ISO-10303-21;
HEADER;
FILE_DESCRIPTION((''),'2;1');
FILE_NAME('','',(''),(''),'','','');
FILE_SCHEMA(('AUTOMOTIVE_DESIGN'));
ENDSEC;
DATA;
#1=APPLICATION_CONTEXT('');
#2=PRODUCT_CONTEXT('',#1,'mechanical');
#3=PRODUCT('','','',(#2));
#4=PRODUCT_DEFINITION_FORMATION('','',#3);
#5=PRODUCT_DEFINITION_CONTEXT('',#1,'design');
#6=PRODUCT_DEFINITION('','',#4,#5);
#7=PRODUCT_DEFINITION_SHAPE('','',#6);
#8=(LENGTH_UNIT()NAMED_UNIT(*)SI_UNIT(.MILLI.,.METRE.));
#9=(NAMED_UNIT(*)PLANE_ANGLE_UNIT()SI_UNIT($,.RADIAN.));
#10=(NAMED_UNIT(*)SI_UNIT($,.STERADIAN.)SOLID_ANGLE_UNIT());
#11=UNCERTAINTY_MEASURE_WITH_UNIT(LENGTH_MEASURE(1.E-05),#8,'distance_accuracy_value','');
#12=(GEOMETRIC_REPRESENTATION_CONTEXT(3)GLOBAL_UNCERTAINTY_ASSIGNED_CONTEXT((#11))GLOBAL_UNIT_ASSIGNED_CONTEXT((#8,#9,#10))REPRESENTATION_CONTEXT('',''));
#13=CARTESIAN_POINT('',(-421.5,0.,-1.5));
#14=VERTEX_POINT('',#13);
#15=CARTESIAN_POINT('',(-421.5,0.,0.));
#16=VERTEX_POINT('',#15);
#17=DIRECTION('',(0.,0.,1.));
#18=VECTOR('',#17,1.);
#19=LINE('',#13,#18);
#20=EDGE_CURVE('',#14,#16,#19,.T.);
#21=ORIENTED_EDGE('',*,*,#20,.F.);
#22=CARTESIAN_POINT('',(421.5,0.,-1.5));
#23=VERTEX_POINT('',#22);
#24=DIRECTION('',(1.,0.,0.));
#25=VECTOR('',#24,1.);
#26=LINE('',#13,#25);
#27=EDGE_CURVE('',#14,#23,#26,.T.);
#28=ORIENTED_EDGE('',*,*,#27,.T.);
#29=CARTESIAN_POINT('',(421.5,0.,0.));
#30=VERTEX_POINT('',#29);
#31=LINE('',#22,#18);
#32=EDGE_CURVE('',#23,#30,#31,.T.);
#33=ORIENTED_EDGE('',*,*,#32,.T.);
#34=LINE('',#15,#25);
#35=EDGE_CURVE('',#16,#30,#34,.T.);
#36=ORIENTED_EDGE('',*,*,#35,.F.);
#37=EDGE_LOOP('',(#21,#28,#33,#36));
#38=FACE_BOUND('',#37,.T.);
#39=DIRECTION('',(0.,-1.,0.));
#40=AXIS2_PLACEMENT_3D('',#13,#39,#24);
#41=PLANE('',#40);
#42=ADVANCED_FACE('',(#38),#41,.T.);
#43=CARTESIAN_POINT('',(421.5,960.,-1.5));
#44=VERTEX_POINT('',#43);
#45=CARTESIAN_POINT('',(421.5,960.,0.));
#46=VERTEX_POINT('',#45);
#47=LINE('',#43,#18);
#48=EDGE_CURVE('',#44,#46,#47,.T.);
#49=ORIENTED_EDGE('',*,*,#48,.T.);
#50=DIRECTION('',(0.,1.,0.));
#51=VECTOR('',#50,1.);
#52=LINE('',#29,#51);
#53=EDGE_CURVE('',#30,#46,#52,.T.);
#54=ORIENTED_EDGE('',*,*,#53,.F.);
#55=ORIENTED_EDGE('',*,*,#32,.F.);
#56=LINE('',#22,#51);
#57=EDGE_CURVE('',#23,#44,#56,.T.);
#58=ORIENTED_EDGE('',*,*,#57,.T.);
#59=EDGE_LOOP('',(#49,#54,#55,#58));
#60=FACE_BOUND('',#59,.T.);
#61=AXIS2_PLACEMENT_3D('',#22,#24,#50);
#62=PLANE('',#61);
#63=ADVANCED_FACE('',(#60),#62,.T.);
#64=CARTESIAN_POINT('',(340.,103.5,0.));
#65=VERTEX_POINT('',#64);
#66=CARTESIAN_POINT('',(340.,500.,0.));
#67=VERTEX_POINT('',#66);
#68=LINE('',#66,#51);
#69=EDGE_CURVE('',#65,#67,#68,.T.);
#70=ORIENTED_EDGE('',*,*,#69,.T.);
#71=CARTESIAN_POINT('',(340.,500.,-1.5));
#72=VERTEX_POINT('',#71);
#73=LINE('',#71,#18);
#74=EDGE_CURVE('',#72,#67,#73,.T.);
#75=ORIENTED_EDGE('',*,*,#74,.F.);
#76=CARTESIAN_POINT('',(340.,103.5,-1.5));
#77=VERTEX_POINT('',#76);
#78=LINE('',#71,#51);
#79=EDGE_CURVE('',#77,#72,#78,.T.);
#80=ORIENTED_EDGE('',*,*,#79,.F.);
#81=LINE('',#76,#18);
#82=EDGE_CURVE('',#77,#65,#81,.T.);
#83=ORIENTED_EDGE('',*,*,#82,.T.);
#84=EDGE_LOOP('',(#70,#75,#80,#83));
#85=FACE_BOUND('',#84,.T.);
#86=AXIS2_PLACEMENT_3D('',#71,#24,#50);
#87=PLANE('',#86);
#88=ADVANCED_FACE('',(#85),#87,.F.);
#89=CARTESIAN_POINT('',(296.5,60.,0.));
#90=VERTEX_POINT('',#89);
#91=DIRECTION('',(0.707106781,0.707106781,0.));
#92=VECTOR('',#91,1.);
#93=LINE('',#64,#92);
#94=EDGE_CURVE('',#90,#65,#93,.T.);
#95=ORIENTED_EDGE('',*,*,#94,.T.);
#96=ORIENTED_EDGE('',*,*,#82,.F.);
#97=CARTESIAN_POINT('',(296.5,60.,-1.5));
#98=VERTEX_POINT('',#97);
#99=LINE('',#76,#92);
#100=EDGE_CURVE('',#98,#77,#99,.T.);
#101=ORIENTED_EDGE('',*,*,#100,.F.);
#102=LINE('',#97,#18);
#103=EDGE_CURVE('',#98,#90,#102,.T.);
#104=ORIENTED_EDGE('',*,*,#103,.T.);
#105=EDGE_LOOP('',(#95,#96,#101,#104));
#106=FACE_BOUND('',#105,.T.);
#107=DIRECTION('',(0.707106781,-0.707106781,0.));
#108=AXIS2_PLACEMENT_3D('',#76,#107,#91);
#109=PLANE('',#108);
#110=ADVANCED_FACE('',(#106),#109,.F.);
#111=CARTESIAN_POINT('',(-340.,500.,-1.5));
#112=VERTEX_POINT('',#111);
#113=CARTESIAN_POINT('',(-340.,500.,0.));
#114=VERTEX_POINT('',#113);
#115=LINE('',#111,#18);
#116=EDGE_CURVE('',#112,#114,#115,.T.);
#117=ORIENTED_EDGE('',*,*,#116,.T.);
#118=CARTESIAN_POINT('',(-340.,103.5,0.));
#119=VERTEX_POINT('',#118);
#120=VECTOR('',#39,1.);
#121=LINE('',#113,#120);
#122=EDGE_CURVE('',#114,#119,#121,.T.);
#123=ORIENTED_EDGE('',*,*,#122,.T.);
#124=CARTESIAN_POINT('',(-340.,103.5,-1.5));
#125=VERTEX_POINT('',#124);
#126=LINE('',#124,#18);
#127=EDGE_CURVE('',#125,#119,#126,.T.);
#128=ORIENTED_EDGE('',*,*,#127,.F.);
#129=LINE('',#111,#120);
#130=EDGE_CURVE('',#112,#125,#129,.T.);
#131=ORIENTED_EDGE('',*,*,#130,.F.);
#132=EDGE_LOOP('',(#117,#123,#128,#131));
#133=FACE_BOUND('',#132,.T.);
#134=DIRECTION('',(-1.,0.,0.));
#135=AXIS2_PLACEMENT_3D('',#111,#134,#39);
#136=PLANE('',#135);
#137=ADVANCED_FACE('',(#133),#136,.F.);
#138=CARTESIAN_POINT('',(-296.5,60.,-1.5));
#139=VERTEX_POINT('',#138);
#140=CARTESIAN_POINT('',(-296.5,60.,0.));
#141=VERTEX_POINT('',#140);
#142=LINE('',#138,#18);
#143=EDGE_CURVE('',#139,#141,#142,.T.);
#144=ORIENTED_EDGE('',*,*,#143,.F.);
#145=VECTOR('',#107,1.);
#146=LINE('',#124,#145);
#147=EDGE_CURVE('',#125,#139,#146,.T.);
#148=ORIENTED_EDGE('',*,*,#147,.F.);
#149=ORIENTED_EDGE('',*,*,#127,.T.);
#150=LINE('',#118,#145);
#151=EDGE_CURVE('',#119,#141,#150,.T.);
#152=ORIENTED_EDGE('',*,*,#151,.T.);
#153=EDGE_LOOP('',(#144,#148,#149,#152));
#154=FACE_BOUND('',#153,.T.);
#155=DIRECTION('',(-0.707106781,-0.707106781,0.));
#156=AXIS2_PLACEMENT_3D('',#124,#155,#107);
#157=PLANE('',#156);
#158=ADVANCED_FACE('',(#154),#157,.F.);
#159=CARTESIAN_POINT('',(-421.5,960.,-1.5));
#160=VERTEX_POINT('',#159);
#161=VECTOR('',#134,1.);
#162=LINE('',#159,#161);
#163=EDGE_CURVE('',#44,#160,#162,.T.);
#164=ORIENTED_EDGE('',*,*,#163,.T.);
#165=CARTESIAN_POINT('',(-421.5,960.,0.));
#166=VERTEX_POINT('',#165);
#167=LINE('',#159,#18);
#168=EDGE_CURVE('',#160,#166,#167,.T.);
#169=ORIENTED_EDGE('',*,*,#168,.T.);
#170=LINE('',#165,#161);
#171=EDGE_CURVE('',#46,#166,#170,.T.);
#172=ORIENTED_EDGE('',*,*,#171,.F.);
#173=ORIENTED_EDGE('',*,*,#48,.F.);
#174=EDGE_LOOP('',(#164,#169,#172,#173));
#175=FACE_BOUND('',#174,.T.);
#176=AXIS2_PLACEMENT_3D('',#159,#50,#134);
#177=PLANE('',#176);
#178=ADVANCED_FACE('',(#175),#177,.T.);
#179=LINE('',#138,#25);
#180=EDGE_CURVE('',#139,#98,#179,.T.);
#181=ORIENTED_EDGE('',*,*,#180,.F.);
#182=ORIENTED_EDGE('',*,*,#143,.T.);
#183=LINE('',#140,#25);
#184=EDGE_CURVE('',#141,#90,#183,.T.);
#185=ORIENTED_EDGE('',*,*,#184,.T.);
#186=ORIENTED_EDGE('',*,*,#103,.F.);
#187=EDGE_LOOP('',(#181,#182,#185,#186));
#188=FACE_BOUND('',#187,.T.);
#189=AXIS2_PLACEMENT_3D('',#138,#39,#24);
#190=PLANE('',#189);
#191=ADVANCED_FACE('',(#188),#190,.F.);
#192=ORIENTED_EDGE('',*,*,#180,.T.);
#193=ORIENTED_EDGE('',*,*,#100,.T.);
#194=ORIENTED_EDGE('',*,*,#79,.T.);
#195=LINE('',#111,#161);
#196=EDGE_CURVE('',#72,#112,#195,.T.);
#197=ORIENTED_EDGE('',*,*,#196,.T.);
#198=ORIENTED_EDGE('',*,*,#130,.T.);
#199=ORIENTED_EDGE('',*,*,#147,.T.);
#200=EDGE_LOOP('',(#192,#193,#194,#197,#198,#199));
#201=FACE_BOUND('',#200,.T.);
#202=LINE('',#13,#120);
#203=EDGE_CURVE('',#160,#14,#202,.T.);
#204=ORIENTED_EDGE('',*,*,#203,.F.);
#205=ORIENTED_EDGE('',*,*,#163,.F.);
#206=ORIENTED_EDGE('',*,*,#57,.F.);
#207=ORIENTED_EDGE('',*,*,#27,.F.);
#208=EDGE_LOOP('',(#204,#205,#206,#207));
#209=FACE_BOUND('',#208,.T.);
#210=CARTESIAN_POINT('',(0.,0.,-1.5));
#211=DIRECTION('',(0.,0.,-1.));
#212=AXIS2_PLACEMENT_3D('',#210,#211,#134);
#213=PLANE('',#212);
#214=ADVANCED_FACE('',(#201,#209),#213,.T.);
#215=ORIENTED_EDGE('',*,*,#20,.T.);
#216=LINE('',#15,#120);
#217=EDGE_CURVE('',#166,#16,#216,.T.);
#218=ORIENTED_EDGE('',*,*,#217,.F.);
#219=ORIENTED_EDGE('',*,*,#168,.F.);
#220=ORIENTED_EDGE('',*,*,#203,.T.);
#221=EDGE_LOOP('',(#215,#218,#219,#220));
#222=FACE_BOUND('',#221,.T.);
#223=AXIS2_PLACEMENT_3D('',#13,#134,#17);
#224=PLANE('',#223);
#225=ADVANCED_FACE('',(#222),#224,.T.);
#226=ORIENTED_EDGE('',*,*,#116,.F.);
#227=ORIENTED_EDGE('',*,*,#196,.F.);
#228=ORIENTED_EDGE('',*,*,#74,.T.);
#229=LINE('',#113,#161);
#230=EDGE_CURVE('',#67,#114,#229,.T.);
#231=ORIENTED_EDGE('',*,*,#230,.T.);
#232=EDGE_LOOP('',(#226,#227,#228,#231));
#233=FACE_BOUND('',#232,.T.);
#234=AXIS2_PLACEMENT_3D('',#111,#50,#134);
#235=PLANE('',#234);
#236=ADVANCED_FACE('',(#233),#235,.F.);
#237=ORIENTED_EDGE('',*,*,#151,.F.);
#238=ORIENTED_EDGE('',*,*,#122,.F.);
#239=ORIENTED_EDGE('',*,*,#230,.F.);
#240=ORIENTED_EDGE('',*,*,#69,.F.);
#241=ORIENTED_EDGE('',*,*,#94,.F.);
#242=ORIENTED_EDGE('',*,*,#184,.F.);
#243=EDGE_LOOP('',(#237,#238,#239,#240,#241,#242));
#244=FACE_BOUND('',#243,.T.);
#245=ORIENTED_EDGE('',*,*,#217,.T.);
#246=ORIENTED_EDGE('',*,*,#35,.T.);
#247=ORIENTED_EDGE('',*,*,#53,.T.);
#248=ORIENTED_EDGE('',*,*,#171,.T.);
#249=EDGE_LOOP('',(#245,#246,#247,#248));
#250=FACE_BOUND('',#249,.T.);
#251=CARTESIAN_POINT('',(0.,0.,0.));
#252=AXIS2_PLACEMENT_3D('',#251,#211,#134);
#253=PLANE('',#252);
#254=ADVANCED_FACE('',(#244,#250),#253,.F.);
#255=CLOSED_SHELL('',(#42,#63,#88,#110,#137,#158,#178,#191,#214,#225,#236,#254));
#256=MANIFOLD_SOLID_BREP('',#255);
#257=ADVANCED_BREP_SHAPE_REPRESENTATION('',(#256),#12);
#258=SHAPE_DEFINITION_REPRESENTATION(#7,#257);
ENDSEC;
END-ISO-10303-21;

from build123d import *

# Parameters (mm, degrees)
SKETCH1_W          = 843
SKETCH1_H          = 960
BASE_FLANGE1_DEPTH = 1.5


# Sheet-metal steps are written as plain solids
with BuildPart() as part:
    # Sketch1 → Base-Flange1 (new body)
    with BuildSketch(Plane.XY):
        with Locations((0, 480)):
            Rectangle(SKETCH1_W, SKETCH1_H)
        Polygon((-340, 500), (-340, 103.5), (-296.5, 60), (296.5, 60), (340, 103.5), (340, 500), align=None, mode=Mode.SUBTRACT)
    extrude(amount=-BASE_FLANGE1_DEPTH)


solid = part.part
